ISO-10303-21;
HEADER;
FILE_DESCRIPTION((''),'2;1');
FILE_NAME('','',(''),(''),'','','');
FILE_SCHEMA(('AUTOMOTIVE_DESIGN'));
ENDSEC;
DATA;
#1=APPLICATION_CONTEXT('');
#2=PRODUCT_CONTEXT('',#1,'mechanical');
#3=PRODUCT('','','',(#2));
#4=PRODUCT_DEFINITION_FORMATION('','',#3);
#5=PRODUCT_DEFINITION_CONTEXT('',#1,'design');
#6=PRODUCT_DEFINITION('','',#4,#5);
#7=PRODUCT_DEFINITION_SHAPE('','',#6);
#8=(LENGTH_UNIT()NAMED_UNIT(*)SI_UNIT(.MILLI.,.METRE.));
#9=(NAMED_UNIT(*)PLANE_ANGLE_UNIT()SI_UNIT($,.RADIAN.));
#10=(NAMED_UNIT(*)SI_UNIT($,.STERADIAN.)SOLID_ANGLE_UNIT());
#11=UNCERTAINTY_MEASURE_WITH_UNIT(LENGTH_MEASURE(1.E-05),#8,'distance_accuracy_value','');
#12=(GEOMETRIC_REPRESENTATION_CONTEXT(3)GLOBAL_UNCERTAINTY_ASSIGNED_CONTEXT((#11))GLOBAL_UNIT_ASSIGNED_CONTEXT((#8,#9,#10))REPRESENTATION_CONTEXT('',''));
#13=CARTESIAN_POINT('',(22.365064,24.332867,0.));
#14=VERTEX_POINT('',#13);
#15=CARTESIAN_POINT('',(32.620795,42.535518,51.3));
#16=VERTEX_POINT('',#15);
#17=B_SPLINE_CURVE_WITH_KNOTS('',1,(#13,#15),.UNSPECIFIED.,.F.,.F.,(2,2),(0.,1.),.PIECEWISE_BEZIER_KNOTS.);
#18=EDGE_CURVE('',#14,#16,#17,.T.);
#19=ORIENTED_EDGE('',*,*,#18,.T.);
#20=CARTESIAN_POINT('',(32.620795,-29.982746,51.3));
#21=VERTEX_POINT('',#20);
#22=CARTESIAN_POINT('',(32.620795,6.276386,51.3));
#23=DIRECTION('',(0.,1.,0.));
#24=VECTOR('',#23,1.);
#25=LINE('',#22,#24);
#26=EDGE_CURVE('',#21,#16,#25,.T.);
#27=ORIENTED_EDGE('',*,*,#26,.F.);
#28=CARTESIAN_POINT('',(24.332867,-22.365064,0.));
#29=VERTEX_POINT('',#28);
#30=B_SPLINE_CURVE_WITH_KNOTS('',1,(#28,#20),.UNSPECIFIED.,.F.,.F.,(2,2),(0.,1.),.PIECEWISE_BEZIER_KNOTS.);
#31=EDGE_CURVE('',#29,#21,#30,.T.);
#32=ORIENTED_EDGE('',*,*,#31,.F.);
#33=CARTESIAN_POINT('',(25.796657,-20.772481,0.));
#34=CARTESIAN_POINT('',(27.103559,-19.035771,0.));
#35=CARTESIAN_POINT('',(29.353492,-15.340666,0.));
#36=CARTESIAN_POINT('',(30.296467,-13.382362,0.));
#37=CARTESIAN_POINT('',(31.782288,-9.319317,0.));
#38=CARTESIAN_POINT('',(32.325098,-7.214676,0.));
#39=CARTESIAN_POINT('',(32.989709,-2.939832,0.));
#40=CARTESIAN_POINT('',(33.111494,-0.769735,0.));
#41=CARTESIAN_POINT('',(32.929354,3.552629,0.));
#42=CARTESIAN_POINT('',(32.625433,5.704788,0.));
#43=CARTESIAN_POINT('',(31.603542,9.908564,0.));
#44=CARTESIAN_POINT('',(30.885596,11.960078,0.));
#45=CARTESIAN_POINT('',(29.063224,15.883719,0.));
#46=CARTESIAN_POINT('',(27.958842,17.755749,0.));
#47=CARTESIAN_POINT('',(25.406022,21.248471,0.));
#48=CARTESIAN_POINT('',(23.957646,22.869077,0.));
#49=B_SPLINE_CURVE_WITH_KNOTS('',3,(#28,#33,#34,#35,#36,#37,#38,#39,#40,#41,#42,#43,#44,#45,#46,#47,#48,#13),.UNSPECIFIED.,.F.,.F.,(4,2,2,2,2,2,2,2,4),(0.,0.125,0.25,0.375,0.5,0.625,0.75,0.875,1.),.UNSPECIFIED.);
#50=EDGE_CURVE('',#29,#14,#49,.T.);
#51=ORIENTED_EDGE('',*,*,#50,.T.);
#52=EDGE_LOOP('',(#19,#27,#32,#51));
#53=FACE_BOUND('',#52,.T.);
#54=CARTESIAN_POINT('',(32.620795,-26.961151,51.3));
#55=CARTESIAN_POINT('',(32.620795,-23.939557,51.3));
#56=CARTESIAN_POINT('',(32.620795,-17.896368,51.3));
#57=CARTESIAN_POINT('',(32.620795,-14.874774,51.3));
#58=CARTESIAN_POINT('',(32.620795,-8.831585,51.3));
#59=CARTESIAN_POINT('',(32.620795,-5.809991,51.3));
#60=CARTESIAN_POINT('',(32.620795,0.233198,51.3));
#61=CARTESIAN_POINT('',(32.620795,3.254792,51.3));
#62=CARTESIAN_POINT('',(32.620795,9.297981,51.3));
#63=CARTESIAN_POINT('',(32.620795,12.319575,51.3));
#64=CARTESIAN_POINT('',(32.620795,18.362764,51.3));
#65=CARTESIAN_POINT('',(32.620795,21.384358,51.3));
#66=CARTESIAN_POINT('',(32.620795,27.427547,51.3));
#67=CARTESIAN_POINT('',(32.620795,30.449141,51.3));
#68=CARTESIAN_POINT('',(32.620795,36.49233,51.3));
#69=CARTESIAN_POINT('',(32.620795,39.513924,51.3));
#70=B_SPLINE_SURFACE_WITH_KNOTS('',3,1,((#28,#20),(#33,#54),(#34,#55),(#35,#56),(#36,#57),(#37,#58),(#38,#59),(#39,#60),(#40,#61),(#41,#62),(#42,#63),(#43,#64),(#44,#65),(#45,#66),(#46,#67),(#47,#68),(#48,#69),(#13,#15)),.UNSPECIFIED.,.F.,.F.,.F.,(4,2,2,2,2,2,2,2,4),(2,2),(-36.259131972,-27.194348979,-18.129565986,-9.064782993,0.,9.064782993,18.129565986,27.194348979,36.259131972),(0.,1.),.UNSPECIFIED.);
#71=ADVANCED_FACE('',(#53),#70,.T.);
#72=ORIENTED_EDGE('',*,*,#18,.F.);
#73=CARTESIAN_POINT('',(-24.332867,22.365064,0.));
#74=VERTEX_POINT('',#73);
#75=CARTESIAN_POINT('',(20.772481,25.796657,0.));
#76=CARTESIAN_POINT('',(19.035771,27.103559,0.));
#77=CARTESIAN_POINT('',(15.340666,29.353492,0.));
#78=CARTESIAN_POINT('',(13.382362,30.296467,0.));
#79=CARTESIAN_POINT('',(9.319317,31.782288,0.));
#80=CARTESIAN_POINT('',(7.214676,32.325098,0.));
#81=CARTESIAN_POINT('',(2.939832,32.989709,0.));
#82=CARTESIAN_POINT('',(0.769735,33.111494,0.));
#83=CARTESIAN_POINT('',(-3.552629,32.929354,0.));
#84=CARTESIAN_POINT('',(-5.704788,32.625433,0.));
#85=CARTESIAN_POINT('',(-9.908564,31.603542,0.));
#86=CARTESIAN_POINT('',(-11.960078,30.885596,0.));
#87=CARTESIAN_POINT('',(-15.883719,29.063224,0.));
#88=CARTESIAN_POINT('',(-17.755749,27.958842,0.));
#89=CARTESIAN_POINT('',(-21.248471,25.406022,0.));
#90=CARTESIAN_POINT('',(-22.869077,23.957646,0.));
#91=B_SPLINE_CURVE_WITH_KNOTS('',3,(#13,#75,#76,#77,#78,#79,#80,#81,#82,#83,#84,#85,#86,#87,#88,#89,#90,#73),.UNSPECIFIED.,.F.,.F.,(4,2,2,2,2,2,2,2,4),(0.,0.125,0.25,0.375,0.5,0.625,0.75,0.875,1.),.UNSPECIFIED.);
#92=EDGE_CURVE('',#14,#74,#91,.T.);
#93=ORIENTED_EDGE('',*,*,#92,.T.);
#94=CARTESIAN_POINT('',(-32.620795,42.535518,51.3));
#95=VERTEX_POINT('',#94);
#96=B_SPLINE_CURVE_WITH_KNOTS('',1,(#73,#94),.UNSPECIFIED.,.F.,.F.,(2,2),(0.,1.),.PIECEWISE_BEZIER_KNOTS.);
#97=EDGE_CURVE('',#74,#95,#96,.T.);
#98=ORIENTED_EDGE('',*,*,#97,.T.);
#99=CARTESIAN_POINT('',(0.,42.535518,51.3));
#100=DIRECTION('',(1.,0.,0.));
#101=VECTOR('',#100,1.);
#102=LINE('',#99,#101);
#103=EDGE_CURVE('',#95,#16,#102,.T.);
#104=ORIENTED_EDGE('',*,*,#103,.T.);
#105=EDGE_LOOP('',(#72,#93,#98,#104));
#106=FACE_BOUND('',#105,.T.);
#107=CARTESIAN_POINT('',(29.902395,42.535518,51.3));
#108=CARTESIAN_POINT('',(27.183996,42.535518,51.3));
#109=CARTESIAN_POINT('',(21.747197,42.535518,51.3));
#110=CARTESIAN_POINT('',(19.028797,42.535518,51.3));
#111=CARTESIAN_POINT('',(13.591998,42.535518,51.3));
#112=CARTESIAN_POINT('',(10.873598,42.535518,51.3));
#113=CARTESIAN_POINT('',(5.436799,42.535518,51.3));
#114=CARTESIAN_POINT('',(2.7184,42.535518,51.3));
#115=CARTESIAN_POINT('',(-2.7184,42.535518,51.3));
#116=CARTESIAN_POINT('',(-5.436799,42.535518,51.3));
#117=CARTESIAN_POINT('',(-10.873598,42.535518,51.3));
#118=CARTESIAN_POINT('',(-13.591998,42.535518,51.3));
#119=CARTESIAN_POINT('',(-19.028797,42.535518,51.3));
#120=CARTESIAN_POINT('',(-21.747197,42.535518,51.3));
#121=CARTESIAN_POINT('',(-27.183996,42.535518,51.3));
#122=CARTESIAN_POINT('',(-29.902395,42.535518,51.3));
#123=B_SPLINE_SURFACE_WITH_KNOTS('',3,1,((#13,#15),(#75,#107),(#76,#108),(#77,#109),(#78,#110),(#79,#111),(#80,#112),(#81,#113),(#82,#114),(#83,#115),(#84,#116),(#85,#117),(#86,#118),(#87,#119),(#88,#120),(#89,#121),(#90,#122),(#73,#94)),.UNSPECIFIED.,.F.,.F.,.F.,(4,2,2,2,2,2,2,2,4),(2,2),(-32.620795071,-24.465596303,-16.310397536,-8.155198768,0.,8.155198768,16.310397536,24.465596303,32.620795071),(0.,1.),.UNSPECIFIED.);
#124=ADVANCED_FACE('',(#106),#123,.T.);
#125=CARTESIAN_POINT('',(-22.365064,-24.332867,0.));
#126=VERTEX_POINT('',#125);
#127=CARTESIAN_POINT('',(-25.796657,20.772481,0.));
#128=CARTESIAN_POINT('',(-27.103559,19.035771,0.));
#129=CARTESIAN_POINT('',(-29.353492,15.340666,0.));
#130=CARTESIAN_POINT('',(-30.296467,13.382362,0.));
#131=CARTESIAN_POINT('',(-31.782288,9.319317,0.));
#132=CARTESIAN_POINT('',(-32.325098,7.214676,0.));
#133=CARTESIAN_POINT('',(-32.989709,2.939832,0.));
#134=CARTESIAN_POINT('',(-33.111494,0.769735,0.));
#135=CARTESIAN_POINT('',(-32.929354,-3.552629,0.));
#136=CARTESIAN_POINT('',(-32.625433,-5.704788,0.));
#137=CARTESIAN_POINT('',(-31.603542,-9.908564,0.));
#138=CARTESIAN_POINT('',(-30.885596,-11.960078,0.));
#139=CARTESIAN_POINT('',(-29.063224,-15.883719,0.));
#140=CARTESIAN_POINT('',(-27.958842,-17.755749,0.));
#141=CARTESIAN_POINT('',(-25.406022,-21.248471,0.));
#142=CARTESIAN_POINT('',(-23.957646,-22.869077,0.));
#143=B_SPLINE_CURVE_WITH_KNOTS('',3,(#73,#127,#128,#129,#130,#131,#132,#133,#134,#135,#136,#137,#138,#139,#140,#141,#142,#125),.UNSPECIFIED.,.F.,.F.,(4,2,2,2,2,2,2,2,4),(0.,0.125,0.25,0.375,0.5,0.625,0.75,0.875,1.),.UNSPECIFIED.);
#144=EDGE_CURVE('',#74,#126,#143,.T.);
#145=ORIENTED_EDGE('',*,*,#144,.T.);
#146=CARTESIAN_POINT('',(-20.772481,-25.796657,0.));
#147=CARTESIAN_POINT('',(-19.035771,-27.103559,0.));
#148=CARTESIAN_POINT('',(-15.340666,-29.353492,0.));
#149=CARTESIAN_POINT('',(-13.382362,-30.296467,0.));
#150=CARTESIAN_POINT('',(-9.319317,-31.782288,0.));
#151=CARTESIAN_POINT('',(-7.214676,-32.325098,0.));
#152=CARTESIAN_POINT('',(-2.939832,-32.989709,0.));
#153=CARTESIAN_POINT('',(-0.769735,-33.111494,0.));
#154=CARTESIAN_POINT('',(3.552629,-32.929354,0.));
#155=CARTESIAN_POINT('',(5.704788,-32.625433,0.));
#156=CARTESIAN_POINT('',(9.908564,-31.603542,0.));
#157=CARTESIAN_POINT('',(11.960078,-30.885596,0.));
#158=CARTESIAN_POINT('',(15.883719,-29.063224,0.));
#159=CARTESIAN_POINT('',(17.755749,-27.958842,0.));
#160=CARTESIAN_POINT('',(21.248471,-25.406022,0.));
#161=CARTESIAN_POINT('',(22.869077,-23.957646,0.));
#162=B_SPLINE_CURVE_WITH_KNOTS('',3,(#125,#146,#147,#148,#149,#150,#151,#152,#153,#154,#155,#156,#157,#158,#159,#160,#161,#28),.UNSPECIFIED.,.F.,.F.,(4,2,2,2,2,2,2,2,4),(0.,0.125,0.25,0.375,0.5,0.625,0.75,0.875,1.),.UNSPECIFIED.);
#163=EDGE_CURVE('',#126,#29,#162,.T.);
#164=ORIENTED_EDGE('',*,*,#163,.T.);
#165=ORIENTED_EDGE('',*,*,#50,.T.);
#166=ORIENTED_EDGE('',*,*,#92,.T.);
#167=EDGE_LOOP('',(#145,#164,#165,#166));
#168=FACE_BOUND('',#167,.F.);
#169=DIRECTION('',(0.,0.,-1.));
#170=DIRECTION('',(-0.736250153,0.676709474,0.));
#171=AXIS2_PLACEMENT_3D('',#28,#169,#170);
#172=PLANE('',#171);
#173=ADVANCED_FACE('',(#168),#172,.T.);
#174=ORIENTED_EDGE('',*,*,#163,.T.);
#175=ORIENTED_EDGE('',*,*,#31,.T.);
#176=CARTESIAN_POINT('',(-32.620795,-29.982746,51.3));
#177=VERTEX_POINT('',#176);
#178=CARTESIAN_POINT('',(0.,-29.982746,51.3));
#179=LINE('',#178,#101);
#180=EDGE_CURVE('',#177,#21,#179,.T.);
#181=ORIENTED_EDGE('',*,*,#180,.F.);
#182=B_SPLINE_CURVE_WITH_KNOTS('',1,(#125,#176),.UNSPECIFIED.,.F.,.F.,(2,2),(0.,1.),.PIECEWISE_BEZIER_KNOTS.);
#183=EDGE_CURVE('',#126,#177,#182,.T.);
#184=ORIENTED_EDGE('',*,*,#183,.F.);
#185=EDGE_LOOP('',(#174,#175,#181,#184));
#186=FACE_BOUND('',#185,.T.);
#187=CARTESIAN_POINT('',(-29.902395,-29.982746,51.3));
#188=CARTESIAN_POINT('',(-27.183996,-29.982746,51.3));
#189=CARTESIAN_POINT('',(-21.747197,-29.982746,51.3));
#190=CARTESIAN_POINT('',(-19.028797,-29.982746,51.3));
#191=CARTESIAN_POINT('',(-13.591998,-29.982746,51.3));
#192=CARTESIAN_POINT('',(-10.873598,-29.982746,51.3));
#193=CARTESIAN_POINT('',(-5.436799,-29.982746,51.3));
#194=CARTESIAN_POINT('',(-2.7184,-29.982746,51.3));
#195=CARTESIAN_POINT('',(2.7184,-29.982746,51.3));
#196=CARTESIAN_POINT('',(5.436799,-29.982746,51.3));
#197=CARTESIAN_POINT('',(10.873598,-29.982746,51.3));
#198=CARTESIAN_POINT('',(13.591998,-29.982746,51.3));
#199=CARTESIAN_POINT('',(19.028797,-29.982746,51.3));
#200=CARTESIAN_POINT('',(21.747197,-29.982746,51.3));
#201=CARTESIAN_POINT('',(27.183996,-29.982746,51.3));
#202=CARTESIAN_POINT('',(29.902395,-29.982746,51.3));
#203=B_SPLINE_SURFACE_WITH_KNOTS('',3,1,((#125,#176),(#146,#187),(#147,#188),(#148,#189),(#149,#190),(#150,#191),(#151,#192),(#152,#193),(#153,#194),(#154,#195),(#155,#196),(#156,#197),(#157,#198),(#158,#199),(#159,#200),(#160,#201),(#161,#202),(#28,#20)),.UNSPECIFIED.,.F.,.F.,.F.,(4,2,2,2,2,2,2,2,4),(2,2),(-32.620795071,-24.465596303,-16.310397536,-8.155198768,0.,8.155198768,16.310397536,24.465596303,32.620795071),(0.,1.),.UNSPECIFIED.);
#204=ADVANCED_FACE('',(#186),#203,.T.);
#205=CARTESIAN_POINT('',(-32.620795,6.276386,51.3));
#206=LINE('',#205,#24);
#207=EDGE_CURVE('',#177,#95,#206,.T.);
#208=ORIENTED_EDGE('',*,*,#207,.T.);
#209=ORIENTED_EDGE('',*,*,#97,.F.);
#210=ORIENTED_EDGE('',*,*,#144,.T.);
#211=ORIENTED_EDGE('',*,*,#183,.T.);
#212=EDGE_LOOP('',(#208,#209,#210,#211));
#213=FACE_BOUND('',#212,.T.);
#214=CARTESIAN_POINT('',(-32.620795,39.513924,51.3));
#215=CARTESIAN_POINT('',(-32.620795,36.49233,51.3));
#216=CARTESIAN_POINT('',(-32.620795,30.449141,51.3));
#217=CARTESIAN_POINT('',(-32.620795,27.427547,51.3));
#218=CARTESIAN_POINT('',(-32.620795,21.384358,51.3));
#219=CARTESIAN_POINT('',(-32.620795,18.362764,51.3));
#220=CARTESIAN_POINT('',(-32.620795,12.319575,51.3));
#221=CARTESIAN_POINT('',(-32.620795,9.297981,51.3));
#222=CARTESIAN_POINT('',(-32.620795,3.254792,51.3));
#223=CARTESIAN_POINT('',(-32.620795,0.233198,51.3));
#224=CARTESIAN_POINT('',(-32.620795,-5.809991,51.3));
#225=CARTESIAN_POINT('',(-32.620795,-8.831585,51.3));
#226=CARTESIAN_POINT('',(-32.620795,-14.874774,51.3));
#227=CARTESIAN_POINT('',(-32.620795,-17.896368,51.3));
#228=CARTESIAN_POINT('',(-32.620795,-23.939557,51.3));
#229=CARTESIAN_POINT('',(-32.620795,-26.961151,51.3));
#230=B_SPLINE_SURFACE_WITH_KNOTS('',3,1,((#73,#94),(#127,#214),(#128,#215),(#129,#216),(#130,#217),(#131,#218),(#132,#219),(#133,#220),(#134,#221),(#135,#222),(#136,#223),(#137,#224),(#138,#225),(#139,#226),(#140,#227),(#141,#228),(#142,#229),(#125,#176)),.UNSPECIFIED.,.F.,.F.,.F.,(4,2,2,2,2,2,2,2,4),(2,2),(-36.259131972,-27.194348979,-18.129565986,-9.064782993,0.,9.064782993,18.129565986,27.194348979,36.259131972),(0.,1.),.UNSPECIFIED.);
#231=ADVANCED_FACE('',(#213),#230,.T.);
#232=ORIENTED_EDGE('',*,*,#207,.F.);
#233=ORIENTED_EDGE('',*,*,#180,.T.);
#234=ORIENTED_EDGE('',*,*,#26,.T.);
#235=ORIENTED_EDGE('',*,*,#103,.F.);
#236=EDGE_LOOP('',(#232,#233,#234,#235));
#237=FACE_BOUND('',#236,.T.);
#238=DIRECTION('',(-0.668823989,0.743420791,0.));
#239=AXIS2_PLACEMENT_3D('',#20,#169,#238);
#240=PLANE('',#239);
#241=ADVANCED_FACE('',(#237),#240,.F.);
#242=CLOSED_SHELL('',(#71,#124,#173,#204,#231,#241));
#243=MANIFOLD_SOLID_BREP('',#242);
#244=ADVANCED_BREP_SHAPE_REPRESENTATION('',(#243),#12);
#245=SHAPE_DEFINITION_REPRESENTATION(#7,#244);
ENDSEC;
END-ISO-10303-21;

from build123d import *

# Parameters (mm, degrees)
F2_W = 65.2415901423
F2_H = 72.5182639435


# Not quite as in the source:
# - the arcs of a loft's sections are written as splines that run evenly, so that the points pair up as in the source's solid


with BuildPart() as f3:
    # F1 (on Top) → F3 section 0
    with BuildSketch(Plane.XY):
        with BuildLine():
            add(Edge.make_bspline(
                [(24.3328670737, -22.365063842), (25.7966570792, -20.7724814162), (27.1035590901, -19.0357712032), (29.3534916354, -15.3406658739), (30.2964665359, -13.3823621265), (31.7822879698, -9.3193171453), (32.3250977633, -7.2146763783), (32.9897088011, -2.9398322851), (33.1114936117, -0.7697346629), (32.9293536241, 3.5526286812), (32.6254333297, 5.704787524), (31.6035418543, 9.9085641195), (30.8855959415, 11.9600779256), (29.0632236945, 15.8837189956), (27.9588424221, 17.7557492398), (25.406022147, 21.2484714583), (23.9576462679, 22.8690770682), (22.365063842, 24.3328670737)],
                knots=[0, 0, 0, 0, 0.125, 0.125, 0.25, 0.25, 0.375, 0.375, 0.5, 0.5, 0.625, 0.625, 0.75, 0.75, 0.875, 0.875, 1, 1, 1, 1], degree=3))
            add(Edge.make_bspline(
                [(22.365063842, 24.3328670737), (20.7724814162, 25.7966570792), (19.0357712032, 27.1035590901), (15.3406658739, 29.3534916354), (13.3823621265, 30.2964665359), (9.3193171453, 31.7822879698), (7.2146763783, 32.3250977633), (2.9398322851, 32.9897088011), (0.7697346629, 33.1114936117), (-3.5526286812, 32.9293536241), (-5.704787524, 32.6254333297), (-9.9085641195, 31.6035418543), (-11.9600779256, 30.8855959415), (-15.8837189956, 29.0632236945), (-17.7557492398, 27.9588424221), (-21.2484714583, 25.406022147), (-22.8690770682, 23.9576462679), (-24.3328670737, 22.365063842)],
                knots=[0, 0, 0, 0, 0.125, 0.125, 0.25, 0.25, 0.375, 0.375, 0.5, 0.5, 0.625, 0.625, 0.75, 0.75, 0.875, 0.875, 1, 1, 1, 1], degree=3))
            add(Edge.make_bspline(
                [(-24.3328670737, 22.365063842), (-25.7966570792, 20.7724814162), (-27.1035590901, 19.0357712032), (-29.3534916354, 15.3406658739), (-30.2964665359, 13.3823621265), (-31.7822879698, 9.3193171453), (-32.3250977633, 7.2146763783), (-32.9897088011, 2.9398322851), (-33.1114936117, 0.7697346629), (-32.9293536241, -3.5526286812), (-32.6254333297, -5.704787524), (-31.6035418543, -9.9085641195), (-30.8855959415, -11.9600779256), (-29.0632236945, -15.8837189956), (-27.9588424221, -17.7557492398), (-25.406022147, -21.2484714583), (-23.9576462679, -22.8690770682), (-22.365063842, -24.3328670737)],
                knots=[0, 0, 0, 0, 0.125, 0.125, 0.25, 0.25, 0.375, 0.375, 0.5, 0.5, 0.625, 0.625, 0.75, 0.75, 0.875, 0.875, 1, 1, 1, 1], degree=3))
            add(Edge.make_bspline(
                [(-22.365063842, -24.3328670737), (-20.7724814162, -25.7966570792), (-19.0357712032, -27.1035590901), (-15.3406658739, -29.3534916354), (-13.3823621265, -30.2964665359), (-9.3193171453, -31.7822879698), (-7.2146763783, -32.3250977633), (-2.9398322851, -32.9897088011), (-0.7697346629, -33.1114936117), (3.5526286812, -32.9293536241), (5.704787524, -32.6254333297), (9.9085641195, -31.6035418543), (11.9600779256, -30.8855959415), (15.8837189956, -29.0632236945), (17.7557492398, -27.9588424221), (21.2484714583, -25.406022147), (22.8690770682, -23.9576462679), (24.3328670737, -22.365063842)],
                knots=[0, 0, 0, 0, 0.125, 0.125, 0.25, 0.25, 0.375, 0.375, 0.5, 0.5, 0.625, 0.625, 0.75, 0.75, 0.875, 0.875, 1, 1, 1, 1], degree=3))
        make_face()
    # F2 (on offset) → F3 section 1
    with BuildSketch(Plane.XY.offset(51.3)):
        with Locations((0, 6.2763863243)):
            Rectangle(F2_W, F2_H)
    loft(ruled=True)


solid = f3.part
